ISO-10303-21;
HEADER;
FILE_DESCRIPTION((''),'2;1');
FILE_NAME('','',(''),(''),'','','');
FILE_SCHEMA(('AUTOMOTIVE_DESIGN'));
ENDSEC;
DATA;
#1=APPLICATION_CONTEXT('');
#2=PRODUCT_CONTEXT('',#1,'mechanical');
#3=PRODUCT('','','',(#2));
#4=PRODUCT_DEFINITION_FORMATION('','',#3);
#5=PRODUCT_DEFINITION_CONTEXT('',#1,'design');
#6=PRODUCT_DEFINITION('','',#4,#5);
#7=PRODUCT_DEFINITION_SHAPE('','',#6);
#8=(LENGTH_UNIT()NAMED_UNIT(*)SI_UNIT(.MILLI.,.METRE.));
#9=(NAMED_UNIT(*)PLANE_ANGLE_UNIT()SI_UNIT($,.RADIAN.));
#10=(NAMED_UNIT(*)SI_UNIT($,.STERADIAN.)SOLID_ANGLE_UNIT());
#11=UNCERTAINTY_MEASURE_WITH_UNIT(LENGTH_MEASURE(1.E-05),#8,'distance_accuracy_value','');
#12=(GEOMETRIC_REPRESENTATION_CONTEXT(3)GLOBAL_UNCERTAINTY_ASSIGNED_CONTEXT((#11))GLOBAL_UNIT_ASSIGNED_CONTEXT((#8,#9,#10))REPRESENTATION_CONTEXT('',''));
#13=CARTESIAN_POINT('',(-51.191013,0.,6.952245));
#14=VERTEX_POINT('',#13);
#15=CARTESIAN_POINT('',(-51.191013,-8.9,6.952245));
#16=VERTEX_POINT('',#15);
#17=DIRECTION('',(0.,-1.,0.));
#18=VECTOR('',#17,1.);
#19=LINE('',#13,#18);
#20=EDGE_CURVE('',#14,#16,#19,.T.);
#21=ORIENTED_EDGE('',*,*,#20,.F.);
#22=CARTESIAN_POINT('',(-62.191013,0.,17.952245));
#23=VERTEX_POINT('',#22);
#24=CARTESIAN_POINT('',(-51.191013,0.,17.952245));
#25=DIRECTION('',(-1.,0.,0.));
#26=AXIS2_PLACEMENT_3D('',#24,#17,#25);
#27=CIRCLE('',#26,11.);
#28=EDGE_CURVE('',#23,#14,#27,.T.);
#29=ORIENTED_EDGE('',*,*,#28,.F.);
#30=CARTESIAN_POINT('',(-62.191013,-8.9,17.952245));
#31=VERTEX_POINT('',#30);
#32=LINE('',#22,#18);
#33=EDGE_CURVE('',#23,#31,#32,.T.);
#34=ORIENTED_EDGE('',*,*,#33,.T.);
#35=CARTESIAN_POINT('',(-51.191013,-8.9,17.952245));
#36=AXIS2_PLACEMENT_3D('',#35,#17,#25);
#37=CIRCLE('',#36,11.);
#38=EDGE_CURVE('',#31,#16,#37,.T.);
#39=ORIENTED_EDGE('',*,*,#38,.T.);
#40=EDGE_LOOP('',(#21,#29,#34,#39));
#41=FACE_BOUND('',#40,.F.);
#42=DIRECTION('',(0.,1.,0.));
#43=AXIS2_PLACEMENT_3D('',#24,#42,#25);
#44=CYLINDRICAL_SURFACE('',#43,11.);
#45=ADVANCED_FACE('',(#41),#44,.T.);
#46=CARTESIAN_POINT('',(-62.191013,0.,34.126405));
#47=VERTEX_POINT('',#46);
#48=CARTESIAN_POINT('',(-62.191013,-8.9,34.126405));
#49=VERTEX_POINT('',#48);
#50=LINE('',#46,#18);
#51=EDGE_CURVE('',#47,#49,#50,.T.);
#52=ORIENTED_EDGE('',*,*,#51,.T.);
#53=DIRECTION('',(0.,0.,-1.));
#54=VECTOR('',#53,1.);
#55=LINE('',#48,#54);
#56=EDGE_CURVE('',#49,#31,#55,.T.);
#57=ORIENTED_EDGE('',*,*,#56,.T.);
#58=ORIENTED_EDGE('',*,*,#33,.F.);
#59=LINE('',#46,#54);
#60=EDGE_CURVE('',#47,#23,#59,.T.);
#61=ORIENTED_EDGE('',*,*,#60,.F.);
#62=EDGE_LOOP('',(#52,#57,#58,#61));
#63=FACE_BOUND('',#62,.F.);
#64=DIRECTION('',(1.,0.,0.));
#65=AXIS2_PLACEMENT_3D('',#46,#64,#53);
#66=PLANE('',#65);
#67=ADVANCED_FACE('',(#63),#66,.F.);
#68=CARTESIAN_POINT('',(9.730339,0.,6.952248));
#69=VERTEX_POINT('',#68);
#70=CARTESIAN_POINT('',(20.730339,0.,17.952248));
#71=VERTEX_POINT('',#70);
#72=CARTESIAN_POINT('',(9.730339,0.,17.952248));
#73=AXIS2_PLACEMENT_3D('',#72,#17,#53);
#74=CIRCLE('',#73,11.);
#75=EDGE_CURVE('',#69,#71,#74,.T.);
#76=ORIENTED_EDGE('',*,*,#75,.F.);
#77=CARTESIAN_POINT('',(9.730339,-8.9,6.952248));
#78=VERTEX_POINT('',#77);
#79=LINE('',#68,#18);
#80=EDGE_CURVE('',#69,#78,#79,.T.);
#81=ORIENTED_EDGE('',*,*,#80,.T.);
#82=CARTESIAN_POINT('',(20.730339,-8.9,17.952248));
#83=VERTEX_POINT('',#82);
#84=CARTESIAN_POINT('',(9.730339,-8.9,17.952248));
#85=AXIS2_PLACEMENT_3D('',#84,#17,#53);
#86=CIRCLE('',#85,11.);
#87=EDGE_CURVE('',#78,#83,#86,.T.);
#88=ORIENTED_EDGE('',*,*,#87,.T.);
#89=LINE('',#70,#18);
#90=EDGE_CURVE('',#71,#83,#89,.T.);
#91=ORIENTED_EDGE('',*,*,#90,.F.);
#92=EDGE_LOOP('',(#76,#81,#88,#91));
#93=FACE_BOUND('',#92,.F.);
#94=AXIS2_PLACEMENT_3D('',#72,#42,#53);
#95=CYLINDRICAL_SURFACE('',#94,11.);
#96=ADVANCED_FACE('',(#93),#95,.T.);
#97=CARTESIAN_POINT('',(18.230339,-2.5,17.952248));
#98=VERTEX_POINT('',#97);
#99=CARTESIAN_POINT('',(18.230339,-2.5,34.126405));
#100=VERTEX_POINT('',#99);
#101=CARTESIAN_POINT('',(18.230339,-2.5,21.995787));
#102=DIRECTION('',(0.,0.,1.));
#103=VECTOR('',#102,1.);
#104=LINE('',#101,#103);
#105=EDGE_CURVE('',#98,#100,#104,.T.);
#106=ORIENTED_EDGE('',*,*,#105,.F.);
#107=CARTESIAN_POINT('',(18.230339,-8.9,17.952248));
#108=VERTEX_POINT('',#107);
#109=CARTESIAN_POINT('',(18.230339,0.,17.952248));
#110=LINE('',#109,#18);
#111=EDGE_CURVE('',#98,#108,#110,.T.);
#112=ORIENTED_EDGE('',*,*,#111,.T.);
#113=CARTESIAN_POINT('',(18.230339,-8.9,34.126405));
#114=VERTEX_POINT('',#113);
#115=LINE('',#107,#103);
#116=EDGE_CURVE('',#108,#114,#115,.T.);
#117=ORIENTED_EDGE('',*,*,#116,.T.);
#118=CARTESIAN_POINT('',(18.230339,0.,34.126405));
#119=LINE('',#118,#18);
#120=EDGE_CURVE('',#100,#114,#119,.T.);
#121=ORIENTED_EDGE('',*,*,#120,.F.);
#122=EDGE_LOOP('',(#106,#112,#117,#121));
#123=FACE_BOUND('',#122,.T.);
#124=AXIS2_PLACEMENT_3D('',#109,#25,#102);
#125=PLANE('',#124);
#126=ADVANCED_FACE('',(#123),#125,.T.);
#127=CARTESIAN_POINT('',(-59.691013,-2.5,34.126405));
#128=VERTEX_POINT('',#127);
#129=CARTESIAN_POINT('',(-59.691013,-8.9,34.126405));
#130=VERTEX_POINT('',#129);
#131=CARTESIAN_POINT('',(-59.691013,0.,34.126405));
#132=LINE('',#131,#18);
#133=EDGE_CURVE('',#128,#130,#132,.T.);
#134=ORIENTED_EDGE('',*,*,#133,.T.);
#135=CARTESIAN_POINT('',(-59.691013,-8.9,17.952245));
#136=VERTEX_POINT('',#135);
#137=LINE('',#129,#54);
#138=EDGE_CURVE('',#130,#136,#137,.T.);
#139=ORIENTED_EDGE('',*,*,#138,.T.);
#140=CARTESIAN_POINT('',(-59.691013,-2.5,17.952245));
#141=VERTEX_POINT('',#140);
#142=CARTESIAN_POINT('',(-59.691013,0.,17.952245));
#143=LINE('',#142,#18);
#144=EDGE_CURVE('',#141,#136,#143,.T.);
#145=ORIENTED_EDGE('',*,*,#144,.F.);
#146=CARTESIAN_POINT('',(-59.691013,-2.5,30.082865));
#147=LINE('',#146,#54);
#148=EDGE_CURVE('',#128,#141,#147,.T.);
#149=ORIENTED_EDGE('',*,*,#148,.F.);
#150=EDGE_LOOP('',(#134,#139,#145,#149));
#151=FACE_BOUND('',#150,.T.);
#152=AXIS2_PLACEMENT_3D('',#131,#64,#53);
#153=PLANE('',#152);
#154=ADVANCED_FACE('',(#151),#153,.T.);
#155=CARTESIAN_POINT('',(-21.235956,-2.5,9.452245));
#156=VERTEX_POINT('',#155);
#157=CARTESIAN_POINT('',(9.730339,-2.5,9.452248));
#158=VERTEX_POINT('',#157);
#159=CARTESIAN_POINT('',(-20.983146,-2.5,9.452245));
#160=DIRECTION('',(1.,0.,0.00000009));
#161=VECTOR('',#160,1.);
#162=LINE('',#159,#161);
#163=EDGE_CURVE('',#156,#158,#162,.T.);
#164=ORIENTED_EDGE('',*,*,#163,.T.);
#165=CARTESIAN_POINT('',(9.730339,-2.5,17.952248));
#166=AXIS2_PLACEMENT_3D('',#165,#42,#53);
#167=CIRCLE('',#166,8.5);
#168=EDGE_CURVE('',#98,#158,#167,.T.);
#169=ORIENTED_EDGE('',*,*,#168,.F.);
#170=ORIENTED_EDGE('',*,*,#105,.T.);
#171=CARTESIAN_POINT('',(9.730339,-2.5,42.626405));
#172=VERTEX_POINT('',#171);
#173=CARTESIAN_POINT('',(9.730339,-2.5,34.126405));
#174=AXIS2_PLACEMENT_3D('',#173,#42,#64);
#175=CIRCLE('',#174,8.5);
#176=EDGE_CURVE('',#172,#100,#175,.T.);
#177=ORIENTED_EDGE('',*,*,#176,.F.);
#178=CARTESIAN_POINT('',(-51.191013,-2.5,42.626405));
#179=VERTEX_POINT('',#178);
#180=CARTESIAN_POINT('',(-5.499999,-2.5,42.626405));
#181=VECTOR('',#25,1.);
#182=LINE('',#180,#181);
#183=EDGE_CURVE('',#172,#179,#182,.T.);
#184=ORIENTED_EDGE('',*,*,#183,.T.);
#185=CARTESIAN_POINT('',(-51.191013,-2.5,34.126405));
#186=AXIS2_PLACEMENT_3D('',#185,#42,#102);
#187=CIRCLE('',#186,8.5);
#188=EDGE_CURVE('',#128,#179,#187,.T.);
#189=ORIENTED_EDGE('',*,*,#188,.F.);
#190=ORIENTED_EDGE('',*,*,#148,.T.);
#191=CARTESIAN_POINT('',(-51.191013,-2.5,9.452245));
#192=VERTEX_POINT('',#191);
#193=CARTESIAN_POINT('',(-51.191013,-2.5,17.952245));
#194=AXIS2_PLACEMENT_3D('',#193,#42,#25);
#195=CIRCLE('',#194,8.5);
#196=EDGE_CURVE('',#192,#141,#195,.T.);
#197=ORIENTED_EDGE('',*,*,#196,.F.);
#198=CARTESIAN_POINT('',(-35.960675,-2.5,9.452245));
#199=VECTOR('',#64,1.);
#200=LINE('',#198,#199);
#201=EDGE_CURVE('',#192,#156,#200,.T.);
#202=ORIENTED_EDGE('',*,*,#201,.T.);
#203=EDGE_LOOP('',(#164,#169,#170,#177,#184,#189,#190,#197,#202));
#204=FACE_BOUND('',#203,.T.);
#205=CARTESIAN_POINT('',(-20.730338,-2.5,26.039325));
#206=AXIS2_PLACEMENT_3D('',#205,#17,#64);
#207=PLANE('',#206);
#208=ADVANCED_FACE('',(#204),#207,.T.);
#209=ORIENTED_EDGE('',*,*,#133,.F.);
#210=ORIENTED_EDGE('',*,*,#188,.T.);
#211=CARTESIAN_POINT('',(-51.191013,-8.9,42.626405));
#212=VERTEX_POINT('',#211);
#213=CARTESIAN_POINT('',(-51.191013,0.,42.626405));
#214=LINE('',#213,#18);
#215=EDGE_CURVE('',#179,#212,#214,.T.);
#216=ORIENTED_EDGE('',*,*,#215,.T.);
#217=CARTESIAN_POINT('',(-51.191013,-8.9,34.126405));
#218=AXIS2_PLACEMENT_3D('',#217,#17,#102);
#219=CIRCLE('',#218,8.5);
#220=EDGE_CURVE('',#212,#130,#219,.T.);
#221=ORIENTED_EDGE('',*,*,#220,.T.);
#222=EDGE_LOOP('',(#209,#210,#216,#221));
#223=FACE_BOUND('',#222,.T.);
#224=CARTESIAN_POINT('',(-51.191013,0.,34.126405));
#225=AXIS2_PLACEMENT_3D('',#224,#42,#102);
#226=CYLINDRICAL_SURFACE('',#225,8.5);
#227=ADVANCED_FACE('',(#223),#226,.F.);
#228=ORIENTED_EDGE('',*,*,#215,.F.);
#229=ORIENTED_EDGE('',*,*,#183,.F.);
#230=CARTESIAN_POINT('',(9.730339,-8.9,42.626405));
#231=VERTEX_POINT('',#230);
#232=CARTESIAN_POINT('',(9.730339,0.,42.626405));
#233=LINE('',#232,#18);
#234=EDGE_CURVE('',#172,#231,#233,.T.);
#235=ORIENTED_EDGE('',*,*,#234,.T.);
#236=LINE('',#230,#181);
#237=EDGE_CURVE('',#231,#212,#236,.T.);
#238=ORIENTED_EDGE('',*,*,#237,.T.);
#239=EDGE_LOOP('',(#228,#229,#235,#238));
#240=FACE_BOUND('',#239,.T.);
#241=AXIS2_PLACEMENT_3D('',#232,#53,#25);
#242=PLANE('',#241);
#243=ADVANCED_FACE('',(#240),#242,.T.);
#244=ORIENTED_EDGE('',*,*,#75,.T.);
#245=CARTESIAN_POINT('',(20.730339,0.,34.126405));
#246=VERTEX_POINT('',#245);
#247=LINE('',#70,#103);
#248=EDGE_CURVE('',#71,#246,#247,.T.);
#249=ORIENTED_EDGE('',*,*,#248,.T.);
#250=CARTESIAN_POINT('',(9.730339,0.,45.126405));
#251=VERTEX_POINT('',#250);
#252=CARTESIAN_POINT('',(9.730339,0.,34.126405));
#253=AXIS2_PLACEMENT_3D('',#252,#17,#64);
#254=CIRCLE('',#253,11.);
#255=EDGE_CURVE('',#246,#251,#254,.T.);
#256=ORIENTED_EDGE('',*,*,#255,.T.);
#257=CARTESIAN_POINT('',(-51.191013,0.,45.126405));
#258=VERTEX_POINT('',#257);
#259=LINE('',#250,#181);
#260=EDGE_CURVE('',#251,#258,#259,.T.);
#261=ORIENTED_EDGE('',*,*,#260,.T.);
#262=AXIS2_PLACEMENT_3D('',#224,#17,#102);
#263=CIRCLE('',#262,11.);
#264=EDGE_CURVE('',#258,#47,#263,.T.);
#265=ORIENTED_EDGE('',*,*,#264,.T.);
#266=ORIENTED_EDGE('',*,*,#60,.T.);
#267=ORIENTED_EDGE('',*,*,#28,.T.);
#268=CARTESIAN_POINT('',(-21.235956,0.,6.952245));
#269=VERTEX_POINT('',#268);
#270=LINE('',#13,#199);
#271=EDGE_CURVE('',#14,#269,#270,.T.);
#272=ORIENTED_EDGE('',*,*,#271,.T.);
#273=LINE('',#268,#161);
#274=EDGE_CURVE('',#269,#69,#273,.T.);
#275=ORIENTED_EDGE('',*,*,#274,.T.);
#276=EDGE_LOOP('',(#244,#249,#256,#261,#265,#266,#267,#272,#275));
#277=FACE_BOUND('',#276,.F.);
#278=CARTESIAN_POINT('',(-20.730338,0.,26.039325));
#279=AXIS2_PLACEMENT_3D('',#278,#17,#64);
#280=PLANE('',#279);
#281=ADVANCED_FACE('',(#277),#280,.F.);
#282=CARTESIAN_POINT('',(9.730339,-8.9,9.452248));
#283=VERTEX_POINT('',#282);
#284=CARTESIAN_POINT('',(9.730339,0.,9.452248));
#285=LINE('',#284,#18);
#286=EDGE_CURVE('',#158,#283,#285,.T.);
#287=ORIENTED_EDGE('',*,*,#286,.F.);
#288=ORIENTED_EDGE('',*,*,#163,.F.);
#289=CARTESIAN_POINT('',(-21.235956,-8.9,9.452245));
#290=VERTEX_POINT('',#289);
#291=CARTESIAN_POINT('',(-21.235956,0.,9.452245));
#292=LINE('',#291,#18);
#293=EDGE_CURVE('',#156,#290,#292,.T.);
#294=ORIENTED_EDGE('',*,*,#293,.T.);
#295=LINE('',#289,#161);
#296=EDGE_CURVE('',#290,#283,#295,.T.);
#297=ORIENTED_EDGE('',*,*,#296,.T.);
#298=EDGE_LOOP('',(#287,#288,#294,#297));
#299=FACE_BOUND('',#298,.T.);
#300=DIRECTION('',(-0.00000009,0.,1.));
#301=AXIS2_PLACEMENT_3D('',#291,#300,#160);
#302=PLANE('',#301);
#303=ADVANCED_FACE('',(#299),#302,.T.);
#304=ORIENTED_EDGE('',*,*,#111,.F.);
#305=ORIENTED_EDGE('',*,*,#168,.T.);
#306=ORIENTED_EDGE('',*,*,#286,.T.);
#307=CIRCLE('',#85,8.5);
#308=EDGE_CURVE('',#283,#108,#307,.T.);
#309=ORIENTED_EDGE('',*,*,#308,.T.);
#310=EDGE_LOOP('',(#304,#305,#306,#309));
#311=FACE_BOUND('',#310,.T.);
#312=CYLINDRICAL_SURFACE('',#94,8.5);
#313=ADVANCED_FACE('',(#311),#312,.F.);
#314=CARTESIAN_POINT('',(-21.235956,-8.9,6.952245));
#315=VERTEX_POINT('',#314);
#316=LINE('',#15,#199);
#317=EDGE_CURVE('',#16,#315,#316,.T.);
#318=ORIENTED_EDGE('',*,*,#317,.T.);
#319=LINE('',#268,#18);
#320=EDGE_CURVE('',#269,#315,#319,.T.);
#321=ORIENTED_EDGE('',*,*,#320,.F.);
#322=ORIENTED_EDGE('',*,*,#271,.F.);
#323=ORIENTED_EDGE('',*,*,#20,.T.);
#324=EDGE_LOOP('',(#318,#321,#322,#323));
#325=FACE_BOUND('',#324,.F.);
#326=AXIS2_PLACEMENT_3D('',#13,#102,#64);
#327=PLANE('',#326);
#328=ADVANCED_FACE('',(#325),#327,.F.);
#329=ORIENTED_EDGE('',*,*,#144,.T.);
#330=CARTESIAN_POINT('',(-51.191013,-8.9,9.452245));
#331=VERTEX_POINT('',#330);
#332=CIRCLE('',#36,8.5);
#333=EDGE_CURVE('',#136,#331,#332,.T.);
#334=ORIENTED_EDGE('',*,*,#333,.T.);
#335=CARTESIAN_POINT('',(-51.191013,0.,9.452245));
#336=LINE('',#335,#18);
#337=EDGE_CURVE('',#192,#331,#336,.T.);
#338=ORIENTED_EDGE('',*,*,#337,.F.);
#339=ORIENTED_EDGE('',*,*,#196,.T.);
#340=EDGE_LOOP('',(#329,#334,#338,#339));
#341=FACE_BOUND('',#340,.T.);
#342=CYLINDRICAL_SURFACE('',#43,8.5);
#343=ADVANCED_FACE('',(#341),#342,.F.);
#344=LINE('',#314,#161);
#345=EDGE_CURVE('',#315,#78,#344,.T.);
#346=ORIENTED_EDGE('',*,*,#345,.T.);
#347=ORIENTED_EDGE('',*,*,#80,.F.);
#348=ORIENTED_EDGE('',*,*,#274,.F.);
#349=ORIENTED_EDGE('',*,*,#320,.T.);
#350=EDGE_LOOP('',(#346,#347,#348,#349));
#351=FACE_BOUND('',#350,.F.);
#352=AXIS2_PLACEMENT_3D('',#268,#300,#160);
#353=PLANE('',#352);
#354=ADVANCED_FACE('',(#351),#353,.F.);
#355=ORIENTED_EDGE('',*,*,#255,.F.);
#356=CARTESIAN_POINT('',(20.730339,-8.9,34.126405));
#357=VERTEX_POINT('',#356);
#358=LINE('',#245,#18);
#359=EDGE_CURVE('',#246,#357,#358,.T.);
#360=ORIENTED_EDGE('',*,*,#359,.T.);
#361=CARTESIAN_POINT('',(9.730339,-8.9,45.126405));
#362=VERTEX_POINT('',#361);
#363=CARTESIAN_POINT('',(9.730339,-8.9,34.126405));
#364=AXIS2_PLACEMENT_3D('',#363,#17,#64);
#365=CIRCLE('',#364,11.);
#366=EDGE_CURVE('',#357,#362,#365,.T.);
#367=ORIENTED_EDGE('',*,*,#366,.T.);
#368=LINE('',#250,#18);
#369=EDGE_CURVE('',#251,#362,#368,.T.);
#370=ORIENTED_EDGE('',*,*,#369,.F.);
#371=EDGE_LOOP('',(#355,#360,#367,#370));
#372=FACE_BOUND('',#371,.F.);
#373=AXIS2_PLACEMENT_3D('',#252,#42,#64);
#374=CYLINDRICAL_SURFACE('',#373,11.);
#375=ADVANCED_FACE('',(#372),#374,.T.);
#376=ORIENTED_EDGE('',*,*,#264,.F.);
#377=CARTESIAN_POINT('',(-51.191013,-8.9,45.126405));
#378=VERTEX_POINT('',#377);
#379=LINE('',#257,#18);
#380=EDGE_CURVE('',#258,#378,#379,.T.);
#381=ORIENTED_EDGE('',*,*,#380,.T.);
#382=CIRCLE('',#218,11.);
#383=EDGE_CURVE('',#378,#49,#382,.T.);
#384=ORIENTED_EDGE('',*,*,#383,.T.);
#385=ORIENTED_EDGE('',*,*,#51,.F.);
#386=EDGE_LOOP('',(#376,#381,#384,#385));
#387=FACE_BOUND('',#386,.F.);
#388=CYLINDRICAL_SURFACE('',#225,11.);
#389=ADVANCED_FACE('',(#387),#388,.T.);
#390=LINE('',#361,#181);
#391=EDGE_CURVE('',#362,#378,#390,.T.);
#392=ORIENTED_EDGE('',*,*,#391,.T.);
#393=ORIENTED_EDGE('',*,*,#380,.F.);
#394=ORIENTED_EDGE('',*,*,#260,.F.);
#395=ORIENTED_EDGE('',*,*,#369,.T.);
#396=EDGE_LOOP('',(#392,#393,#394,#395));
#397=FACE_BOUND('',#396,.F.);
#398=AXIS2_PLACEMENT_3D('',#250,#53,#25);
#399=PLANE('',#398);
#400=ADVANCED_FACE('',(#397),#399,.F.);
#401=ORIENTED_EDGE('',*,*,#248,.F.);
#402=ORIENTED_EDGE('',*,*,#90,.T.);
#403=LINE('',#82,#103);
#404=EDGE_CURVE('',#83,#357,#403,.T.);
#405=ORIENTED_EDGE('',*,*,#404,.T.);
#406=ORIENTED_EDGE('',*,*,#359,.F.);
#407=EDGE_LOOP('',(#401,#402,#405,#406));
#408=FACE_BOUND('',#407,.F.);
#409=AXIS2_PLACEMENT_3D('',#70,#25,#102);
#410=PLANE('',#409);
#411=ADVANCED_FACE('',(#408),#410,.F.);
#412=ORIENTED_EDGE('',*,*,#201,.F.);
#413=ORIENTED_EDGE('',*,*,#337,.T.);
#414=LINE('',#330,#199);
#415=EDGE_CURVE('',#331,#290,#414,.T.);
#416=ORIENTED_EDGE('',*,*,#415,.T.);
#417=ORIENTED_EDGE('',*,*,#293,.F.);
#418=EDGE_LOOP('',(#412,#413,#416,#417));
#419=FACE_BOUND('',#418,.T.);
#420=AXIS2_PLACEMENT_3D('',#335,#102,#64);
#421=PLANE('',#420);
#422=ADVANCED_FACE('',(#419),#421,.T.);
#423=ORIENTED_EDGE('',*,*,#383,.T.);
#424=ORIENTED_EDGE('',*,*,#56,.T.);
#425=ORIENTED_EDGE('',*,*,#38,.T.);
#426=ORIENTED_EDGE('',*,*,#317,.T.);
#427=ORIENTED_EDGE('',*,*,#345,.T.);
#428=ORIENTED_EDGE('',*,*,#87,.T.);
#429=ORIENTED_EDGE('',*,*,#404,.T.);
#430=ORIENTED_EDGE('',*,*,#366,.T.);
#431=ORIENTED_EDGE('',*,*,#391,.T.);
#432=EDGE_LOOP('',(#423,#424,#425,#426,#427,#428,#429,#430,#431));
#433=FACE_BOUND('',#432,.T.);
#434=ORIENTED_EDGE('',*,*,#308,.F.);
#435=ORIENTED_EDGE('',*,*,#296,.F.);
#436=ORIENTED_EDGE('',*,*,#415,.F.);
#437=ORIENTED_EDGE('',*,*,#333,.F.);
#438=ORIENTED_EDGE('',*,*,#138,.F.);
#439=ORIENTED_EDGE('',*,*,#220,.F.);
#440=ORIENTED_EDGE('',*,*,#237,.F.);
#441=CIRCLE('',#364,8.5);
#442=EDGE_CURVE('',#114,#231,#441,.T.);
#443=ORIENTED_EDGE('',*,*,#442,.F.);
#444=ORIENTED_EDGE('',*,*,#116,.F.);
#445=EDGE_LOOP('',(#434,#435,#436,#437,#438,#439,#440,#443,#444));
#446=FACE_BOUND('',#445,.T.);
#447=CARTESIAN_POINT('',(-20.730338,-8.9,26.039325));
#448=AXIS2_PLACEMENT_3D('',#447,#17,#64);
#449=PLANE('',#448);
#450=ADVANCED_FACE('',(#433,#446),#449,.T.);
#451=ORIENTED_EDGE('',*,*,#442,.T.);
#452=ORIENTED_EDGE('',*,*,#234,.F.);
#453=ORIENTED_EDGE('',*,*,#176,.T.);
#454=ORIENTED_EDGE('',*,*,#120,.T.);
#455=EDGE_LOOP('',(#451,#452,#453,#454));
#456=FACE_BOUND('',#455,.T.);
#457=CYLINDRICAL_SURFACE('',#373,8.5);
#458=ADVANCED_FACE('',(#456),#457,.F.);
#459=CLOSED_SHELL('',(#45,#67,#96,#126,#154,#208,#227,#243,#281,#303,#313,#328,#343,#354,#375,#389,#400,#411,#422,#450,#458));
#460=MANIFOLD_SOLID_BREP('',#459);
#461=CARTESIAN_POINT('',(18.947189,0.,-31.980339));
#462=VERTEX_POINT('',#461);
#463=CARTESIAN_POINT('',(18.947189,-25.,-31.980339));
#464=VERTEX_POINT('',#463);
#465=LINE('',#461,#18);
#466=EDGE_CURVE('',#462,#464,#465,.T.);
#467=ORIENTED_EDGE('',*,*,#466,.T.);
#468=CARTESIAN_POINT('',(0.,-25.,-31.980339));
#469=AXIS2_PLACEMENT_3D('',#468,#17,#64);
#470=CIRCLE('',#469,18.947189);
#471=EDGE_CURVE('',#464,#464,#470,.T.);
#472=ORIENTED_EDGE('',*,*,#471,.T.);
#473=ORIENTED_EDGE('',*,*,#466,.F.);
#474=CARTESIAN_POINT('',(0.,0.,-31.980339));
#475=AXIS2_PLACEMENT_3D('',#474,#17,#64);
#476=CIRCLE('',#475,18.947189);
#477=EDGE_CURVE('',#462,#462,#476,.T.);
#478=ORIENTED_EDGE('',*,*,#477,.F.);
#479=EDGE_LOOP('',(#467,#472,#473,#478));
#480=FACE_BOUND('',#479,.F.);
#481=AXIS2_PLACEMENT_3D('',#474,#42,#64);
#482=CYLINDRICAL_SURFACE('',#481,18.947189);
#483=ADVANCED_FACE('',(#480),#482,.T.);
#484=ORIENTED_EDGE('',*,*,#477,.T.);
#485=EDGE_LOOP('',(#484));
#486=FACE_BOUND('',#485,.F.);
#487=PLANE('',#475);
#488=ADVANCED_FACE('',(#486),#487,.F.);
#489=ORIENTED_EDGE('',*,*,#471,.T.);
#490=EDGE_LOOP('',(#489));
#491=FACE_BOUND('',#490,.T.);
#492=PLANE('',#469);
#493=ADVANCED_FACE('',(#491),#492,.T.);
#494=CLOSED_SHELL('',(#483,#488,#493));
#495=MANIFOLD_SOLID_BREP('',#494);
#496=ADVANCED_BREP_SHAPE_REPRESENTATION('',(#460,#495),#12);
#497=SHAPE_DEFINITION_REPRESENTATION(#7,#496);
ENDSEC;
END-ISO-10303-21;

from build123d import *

# Parameters (mm, degrees)
F1_DEPTH = 8.9
F2_T     = -2.5
F3_R     = 18.9471893283
F4_DEPTH = 25


# Not quite as in the source:
# - ends of sketch curves that miss each other by under 0.0002 mm in the source are joined


with BuildPart() as f1:
    # F0 (on Front) → F1 (new body)
    with BuildSketch(Plane.XZ):
        with BuildLine():
            Line((-21.2359558791, 45.1264046133), (-51.1910132468, 45.1264046133))
            ThreePointArc((-51.1910132468, 45.1264046133), (-58.9691878398, 41.9045792063), (-62.1910132468, 34.1264046133))
            Line((-62.1910132468, 34.1264046133), (-62.1910132468, 17.9522452541))
            ThreePointArc((-62.1910132468, 17.9522452541), (-58.9691878398, 10.174070661), (-51.1910132468, 6.9522452541))
            Line((-51.1910132468, 6.9522452541), (-21.2359558791, 6.9522452541))
            Line((-21.2359558791, 6.9522452541), (9.7303389907, 6.952248048))
            ThreePointArc((9.7303389907, 6.952248048), (17.5085135837, 10.174073455), (20.7303389907, 17.952248048))
            Line((20.7303389907, 17.952248048), (20.7303389907, 34.1264046133))
            ThreePointArc((20.7303389907, 34.1264046133), (17.5085135837, 41.9045792063), (9.7303389907, 45.1264046133))
            Line((9.7303389907, 45.1264046133), (-21.2359558791, 45.1264046133))
        make_face()
    extrude(amount=F1_DEPTH)

    # F2
    f2_openings = [f1.faces().sort_by_distance(p)[0] for p in [
        (-20.730338, -8.9, 26.039325),
    ]]
    offset(amount=F2_T, openings=f2_openings)


with BuildPart() as f4:
    # F3 (on Front) → F4 (new body)
    with BuildSketch(Plane.XZ):
        with Locations((0, -31.9803394377)):
            Circle(F3_R)
    extrude(amount=F4_DEPTH)


solid = Compound([f1.part, f4.part])
